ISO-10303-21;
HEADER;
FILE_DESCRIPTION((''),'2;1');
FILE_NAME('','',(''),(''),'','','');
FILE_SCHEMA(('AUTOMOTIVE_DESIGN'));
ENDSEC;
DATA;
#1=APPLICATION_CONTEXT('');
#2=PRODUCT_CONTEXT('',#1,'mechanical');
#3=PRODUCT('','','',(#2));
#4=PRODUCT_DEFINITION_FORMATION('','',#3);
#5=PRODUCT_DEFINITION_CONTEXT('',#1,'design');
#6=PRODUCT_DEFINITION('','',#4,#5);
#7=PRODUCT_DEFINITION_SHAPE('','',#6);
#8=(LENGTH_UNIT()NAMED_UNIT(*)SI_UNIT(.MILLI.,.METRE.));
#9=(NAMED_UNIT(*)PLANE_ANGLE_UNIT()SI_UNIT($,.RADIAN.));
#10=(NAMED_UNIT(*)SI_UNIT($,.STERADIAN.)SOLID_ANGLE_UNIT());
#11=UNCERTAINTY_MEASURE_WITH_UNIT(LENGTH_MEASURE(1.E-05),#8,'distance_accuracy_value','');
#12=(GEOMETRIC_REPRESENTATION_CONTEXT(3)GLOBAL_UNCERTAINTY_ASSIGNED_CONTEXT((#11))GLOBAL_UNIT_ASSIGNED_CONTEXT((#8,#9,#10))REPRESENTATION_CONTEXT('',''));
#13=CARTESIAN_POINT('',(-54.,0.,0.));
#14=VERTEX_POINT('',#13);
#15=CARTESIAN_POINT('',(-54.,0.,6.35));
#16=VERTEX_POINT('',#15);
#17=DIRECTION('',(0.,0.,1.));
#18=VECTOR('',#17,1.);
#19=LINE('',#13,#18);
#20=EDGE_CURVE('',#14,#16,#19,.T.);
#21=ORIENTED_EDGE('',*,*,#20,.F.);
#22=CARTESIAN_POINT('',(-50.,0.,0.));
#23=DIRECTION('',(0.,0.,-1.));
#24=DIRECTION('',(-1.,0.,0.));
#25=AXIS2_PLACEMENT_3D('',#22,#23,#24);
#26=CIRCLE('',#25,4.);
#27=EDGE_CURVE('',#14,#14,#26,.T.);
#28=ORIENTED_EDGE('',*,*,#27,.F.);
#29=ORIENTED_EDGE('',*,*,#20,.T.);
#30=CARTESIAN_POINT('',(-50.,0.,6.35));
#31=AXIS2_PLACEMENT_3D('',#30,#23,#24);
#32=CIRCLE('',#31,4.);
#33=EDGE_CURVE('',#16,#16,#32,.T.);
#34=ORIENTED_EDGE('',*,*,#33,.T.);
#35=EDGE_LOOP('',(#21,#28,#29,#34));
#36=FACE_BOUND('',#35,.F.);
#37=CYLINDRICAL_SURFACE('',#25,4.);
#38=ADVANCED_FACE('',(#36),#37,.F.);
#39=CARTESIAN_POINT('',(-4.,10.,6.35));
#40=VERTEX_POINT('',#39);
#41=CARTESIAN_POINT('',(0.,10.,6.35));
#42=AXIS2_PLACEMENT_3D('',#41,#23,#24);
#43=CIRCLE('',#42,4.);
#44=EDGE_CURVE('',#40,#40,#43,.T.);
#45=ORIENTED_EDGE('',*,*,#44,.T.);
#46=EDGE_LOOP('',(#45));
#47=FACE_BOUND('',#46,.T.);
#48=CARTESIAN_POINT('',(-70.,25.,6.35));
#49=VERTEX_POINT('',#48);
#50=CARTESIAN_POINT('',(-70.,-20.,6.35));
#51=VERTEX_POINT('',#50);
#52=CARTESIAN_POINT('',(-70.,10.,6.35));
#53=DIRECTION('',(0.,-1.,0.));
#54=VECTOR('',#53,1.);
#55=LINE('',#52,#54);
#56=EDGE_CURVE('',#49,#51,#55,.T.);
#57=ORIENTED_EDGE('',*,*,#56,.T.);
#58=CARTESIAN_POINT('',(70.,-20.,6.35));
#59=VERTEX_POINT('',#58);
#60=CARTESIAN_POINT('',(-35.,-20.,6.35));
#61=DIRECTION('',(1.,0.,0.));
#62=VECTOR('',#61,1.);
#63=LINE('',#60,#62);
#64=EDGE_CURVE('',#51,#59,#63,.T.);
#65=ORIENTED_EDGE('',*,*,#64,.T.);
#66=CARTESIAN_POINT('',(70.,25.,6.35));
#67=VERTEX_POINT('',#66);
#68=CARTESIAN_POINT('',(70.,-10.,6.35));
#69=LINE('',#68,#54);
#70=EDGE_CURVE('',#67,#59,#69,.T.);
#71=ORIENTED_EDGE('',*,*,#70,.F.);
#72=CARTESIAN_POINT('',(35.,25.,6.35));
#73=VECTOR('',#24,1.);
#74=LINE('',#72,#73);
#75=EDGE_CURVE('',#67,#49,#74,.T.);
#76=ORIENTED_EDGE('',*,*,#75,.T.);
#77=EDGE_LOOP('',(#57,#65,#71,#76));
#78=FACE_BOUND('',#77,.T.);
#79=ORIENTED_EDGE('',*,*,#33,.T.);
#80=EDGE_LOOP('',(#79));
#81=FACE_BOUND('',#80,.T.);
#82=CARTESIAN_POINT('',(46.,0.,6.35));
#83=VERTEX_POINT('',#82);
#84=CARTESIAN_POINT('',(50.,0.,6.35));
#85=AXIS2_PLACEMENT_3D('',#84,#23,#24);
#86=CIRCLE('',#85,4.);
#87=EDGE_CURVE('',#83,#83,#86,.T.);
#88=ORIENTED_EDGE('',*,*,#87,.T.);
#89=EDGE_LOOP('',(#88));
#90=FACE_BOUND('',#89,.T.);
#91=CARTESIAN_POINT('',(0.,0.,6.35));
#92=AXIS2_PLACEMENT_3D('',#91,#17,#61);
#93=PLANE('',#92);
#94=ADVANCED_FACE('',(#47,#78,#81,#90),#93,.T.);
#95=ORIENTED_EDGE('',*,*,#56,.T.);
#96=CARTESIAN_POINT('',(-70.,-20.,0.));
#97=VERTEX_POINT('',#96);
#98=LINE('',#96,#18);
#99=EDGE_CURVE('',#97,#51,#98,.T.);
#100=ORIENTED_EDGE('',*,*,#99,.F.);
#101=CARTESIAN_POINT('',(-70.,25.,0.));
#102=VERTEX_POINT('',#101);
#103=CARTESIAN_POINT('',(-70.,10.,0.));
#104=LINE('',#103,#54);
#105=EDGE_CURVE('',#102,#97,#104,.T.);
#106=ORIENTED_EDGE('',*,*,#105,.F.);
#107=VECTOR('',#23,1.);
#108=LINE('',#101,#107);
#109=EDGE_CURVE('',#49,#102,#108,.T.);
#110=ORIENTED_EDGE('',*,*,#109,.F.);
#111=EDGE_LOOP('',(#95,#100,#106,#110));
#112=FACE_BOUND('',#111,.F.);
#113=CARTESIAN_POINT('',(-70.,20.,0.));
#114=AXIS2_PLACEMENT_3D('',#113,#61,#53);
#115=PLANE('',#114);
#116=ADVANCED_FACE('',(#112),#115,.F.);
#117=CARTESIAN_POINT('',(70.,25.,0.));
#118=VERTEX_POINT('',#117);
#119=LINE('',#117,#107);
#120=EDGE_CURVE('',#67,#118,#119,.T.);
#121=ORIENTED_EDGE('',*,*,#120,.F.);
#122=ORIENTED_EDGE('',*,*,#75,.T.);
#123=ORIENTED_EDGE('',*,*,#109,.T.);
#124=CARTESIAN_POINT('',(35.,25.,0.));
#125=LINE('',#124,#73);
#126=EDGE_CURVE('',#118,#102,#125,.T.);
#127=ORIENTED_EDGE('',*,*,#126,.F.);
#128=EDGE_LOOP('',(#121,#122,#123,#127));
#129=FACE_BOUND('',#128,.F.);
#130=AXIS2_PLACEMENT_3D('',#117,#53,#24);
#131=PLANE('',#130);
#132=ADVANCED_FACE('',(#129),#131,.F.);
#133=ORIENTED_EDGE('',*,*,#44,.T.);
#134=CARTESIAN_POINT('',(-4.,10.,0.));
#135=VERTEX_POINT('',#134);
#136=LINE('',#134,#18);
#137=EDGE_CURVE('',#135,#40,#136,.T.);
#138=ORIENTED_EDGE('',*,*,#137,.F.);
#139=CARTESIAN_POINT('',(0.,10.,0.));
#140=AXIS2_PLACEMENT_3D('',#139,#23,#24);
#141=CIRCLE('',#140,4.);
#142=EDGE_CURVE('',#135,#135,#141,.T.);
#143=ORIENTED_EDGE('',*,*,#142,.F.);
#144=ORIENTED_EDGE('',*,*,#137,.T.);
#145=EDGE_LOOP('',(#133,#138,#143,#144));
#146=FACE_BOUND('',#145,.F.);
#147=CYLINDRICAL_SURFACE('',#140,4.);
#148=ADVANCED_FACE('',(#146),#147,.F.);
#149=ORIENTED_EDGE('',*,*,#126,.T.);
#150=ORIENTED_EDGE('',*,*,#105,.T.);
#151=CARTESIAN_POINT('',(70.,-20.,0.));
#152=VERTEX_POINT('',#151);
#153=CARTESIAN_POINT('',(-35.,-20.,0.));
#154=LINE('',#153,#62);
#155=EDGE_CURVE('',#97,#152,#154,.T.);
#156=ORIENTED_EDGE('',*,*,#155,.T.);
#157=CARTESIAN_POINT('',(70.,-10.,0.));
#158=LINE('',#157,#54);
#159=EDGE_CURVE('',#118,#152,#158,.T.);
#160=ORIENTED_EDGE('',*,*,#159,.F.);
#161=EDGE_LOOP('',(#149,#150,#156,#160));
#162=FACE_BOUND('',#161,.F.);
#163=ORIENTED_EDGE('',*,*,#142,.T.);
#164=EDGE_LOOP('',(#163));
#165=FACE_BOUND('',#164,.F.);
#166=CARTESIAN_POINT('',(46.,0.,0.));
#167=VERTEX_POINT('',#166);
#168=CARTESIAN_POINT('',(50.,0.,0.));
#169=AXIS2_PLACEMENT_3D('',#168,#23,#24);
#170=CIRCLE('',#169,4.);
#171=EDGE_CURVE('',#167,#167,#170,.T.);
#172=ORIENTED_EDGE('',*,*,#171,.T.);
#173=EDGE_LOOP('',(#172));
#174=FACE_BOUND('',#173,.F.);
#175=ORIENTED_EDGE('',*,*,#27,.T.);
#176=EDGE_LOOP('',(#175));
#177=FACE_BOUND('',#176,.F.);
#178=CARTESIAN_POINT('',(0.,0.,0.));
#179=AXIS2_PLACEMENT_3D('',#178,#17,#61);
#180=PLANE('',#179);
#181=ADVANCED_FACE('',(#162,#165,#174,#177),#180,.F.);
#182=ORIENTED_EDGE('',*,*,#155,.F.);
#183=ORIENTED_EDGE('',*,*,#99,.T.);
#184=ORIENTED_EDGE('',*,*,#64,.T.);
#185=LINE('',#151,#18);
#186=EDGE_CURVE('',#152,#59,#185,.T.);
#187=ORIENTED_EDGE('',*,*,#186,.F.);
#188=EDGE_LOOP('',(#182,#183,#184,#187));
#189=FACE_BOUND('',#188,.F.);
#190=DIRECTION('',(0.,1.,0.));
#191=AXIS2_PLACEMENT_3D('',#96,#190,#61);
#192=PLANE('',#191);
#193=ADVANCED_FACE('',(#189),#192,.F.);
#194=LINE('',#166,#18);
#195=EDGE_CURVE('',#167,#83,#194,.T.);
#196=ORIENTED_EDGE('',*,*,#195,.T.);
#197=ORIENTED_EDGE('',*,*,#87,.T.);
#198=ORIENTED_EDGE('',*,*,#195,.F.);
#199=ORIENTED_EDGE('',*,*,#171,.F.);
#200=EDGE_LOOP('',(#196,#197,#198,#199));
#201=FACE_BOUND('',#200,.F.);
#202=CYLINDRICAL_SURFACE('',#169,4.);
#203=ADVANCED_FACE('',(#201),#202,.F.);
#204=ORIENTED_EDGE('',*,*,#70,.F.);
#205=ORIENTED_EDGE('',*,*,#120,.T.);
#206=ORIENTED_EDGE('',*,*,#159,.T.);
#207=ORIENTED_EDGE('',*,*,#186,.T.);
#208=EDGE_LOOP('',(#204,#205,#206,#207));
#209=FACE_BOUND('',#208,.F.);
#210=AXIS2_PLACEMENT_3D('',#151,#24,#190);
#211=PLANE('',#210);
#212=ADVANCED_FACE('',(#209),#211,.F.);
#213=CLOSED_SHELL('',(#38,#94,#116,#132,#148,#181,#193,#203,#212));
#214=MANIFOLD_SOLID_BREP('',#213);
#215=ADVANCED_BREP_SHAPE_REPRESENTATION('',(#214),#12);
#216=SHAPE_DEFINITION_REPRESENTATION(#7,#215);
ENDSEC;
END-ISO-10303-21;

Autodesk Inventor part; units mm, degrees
ref_plane "YZ Plane" through (0, 0, 0) normal (1, 0, 0) x (0, 1, 0)
ref_plane "XZ Plane" through (0, 0, 0) normal (0, 1, 0) x (-1, 0, 0)
ref_plane "XY Plane" through (0, 0, 0) normal (0, 0, 1) x (1, 0, 0)
sketch "Sketch1" plane through (0, 0, 0) normal (0, 0, 1) x (1, 0, 0)
  line L0 (-70, -20) -> (70, -20)
  line L1 (70, -20) -> (70, 20)
  line L2 (70, 20) -> (-70, 20)
  line L3 (-70, 20) -> (-70, -20)
  line L4 (-70, -20) -> (70, 20) construction
  line L5 (70, -20) -> (-70, 20) construction
  point P0 (0, 0)
  dimension "d0" = 140
  dimension "d1" = 40
extrude "Extrusion1" add sketch "Sketch1" along normal blind 6.35
sketch "Sketch2" plane through (0, 0, 0) normal (0, 0, -1) x (-1, 0, 0)
  circle A0 centre (-50, 0) radius 4
  circle A1 centre (0, 10) radius 4
  circle A2 centre (50, 0) radius 4
  line L0 (-70, -20) -> (-70, 20) projected
  point P0 (0, 0)
  point P1 (-70, 0)
  dimension "d4" = 20
  dimension "d5" = 100
  dimension "d6" = 50
  dimension "d7" = 8
  dimension "d8" = 10
extrude "Extrusion2" cut sketch "Sketch2" against normal through all
thicken "Thicken1" operation add thickness 5 both sides no extend neighbours yes toward (0, 1, 0) faces at (23.3333, 20, 2.1167)
properties part number "Zapata_freno"
